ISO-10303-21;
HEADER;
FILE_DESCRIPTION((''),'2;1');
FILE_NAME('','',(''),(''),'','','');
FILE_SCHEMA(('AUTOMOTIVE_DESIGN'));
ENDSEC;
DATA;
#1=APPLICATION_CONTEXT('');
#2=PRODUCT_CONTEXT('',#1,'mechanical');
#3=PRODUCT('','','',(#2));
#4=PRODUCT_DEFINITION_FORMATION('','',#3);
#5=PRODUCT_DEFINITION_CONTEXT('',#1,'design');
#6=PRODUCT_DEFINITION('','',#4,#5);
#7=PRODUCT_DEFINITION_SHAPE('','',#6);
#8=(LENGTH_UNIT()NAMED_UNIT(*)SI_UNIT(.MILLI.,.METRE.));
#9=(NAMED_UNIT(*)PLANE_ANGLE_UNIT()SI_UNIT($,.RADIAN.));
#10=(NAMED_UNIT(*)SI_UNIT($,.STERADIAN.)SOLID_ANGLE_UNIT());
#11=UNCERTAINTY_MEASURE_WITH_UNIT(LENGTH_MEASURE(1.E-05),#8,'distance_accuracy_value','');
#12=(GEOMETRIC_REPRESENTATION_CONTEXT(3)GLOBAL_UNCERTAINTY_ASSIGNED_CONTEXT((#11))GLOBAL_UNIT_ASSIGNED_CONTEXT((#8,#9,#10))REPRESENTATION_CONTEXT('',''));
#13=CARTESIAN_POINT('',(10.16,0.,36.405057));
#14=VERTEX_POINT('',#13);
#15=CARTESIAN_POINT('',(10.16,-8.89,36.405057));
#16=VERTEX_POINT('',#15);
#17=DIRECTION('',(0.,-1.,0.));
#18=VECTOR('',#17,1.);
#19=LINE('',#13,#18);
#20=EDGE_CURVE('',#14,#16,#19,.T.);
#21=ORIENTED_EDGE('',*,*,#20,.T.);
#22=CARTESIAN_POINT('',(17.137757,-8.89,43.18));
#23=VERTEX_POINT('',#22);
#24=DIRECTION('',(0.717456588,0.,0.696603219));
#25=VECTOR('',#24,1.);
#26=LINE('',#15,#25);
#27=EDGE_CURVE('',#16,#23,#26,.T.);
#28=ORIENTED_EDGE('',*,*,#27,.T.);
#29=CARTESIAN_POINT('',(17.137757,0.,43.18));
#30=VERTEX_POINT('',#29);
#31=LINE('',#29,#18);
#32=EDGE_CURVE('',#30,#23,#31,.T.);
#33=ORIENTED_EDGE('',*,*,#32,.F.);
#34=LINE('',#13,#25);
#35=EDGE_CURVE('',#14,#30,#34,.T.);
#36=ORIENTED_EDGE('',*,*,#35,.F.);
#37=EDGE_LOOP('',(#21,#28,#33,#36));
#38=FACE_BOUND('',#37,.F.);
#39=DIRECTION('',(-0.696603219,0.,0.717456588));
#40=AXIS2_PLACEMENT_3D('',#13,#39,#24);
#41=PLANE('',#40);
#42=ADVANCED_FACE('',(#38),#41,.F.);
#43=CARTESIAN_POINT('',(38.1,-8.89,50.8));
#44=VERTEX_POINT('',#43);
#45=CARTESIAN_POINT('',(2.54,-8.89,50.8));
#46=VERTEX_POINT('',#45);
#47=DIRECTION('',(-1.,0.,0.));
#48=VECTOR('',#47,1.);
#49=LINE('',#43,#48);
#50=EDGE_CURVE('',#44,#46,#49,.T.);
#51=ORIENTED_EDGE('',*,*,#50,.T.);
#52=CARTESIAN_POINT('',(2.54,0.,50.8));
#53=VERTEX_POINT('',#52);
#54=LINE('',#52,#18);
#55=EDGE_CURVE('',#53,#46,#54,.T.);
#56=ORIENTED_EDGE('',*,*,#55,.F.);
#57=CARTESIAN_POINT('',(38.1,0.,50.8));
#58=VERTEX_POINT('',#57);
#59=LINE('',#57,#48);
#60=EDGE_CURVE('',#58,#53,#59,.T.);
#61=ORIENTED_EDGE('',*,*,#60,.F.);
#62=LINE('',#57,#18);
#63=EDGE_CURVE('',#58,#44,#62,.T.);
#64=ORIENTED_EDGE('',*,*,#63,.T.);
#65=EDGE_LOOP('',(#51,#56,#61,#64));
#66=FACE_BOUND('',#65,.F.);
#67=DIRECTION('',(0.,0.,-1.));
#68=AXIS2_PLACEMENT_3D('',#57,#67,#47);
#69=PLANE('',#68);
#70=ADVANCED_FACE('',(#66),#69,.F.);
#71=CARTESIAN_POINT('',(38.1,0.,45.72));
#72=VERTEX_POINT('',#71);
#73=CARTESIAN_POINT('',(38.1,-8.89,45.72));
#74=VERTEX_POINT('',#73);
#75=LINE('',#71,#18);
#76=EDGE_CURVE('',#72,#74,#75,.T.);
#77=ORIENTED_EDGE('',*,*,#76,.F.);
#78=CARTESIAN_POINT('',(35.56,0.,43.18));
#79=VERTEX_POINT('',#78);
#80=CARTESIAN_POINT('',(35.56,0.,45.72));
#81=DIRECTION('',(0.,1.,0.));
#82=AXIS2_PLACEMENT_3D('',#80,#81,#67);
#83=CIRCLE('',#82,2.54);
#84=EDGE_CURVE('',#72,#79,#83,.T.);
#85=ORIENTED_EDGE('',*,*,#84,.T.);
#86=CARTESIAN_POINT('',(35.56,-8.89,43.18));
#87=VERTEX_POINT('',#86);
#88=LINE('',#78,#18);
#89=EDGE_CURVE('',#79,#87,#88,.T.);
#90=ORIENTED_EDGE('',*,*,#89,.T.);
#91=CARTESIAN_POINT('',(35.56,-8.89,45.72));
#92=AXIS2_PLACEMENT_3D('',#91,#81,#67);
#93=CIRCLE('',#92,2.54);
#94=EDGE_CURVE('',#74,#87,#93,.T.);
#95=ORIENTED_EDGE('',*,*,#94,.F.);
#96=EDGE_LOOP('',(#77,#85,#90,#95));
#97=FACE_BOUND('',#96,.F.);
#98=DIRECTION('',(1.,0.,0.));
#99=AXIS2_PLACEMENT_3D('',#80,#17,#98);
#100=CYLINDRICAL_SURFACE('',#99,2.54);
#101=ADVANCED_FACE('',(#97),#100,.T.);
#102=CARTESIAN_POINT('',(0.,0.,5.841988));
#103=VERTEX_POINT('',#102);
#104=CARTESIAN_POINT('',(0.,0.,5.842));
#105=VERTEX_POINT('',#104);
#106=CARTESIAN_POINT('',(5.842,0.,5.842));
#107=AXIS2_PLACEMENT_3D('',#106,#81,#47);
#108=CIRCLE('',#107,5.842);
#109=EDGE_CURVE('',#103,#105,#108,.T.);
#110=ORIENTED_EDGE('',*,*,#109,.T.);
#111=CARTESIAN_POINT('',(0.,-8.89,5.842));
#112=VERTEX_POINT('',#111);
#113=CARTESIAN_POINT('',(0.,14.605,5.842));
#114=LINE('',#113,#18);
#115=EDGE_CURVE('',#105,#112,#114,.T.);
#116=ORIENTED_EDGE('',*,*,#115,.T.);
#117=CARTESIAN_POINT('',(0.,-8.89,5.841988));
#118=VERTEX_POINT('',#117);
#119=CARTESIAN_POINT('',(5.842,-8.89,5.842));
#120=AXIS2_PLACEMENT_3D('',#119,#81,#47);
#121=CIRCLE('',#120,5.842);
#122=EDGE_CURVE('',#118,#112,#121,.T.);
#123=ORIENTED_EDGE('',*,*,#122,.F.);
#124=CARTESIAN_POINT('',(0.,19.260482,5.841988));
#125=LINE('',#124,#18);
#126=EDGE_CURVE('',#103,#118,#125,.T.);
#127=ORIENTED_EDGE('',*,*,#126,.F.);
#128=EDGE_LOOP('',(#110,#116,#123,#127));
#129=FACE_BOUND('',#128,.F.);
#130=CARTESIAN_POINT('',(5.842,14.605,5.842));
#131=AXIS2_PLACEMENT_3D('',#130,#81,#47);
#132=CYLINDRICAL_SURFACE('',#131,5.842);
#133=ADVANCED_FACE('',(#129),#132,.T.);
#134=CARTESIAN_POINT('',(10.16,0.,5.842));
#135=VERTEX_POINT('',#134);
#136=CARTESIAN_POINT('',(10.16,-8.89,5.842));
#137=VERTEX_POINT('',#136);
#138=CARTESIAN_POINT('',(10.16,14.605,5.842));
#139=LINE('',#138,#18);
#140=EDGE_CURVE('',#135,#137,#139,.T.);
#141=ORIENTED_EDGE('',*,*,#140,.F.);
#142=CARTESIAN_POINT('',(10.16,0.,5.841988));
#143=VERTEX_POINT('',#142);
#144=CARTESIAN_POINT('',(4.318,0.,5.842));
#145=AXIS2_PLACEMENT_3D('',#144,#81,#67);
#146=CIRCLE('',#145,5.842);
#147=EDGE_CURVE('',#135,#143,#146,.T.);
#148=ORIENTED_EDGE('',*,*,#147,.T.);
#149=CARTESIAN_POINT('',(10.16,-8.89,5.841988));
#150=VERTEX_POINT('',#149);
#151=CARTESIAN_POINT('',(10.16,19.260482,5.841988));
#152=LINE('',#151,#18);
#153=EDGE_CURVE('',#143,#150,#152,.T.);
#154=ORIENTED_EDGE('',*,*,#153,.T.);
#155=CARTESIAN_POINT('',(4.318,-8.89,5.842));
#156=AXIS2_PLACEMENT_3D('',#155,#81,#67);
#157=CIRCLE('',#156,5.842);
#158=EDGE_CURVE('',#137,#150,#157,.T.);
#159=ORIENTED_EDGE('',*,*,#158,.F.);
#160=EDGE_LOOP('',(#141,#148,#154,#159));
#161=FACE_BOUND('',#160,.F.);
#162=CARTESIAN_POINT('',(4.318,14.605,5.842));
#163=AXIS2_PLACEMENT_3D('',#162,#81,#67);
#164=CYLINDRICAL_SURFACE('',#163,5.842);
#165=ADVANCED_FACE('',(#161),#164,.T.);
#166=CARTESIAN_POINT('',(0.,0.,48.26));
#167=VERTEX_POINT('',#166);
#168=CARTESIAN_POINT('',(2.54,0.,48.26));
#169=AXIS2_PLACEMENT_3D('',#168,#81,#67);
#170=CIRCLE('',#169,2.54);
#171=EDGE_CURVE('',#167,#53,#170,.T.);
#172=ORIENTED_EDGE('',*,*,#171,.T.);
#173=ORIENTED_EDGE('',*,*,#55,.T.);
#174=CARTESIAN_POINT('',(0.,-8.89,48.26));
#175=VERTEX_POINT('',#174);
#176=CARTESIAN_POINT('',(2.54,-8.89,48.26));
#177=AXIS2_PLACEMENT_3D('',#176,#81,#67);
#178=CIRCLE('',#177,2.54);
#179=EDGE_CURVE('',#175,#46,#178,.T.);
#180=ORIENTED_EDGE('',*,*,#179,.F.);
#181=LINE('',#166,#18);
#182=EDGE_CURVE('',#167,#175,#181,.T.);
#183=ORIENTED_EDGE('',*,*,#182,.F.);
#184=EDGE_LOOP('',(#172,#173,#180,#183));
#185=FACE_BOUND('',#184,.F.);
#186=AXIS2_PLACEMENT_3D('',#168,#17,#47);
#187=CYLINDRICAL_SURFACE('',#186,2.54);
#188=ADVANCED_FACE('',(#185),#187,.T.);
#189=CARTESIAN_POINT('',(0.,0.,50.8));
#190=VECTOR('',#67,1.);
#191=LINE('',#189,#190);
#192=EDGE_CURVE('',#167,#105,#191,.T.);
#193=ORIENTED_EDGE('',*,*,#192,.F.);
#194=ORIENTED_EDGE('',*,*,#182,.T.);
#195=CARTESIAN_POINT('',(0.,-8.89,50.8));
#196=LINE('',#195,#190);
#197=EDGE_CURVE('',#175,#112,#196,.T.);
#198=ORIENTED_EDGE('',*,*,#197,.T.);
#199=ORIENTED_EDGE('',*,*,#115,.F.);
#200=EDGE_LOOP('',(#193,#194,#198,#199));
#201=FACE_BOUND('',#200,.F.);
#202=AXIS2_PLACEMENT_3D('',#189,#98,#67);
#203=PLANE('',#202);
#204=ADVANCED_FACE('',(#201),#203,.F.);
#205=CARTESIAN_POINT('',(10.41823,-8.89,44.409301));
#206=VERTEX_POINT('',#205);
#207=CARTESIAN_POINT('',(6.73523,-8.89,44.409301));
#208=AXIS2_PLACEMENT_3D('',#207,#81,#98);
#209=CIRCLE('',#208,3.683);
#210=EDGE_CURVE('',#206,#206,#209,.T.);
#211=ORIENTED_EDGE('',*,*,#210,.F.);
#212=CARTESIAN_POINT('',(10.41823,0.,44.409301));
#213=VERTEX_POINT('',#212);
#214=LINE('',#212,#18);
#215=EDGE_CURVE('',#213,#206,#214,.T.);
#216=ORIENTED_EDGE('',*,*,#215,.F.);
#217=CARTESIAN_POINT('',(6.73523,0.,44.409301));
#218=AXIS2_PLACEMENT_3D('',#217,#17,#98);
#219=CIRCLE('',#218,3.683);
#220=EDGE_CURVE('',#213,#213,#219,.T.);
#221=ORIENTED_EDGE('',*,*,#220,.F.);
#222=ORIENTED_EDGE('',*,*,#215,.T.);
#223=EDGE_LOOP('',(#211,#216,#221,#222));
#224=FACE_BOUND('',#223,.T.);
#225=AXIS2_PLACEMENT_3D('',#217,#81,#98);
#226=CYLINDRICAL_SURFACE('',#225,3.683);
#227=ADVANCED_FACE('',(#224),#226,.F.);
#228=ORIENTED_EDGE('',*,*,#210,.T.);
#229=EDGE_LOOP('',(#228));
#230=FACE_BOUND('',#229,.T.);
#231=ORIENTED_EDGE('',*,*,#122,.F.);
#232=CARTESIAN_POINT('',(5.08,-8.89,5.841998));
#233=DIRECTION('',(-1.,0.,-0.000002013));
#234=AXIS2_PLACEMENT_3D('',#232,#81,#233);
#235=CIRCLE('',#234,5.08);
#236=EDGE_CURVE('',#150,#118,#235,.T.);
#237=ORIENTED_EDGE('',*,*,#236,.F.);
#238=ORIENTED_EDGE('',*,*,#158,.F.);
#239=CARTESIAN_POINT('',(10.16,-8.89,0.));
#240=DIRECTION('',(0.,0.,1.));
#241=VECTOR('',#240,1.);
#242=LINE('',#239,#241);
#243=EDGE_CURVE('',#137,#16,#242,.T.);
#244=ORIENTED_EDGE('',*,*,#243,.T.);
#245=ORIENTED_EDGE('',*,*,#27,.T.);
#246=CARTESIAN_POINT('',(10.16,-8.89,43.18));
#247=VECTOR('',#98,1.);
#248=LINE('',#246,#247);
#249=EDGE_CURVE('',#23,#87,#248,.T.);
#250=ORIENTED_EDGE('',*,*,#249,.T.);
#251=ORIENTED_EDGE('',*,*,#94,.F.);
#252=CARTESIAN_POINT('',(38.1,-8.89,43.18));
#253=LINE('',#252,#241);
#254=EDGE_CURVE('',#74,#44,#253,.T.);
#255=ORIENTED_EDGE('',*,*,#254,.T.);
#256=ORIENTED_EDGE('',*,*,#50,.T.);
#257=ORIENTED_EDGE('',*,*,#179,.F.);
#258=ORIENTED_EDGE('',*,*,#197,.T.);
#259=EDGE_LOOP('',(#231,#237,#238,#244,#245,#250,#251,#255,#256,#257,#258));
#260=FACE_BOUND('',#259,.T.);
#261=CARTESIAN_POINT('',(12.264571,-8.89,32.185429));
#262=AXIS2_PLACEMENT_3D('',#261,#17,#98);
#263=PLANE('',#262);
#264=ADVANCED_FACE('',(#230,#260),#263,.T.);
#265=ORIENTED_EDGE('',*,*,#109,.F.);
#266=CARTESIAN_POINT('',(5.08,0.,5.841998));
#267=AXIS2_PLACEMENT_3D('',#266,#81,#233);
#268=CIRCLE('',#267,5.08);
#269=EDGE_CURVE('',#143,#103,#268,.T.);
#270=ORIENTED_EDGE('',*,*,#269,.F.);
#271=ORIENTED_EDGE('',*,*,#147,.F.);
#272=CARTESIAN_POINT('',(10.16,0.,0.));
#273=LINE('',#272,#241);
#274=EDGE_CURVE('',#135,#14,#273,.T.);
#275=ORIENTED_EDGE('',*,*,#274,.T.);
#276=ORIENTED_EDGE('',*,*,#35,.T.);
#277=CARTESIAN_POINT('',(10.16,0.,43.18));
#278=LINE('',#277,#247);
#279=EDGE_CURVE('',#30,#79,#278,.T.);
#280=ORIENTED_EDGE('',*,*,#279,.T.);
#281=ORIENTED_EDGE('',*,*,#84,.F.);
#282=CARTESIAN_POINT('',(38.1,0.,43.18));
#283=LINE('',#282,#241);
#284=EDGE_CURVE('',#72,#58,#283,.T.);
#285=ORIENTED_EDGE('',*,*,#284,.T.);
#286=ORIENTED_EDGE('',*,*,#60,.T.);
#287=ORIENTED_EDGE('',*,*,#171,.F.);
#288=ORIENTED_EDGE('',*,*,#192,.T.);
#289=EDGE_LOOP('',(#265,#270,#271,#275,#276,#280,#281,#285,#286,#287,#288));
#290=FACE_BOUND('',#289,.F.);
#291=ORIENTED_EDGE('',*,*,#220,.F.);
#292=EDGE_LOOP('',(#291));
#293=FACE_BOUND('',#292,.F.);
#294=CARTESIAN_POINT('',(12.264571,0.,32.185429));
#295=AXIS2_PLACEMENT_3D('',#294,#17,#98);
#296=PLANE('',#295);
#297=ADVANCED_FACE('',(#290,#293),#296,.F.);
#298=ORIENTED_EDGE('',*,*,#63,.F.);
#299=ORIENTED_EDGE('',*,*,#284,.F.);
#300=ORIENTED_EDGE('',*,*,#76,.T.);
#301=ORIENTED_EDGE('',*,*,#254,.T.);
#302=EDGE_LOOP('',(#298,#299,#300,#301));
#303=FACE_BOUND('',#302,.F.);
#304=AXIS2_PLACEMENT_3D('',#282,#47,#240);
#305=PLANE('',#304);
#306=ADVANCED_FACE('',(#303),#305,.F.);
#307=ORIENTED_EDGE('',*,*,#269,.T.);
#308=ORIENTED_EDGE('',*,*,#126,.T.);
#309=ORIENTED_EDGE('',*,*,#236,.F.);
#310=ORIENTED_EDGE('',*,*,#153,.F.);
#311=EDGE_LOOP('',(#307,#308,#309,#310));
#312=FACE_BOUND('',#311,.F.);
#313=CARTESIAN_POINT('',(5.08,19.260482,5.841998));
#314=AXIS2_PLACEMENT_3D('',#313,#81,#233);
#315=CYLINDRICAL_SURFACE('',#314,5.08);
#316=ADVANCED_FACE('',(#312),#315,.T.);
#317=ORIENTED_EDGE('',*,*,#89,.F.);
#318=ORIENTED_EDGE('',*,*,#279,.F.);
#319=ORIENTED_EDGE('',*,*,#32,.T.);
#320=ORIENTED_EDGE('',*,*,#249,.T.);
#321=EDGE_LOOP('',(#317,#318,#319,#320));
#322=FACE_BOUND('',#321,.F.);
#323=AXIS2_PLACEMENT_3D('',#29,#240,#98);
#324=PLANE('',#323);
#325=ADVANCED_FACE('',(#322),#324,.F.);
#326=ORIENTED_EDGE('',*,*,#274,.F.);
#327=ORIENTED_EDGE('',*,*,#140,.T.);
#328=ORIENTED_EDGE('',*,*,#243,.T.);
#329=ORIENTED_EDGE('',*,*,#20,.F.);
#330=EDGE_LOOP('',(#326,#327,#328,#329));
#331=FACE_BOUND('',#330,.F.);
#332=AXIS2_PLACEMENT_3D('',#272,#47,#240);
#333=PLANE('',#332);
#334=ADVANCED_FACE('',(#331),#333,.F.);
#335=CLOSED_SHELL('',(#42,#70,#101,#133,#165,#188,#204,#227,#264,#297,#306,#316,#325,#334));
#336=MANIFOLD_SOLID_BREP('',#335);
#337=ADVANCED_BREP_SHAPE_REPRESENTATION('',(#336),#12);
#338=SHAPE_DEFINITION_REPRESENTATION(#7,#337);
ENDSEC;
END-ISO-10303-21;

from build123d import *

# Parameters (mm, degrees)
F1_DEPTH    = 8.89
F2_R        = 3.683
F3_DEPTH    = 13.208
F4_R        = 2.54
F5_T1_DEPTH = 38.1
F6_T1_DEPTH = 47.4109630585


# Not quite as in the source:
# - a fillet or chamfer that OpenCascade refuses, or shapes differently, is made with other operations: its cross-section is extruded or revolved along the edge and cut away or added


with BuildPart() as f1:
    # F0 (on Front) → F1 (new body)
    with BuildSketch(Plane.XZ):
        Polygon((0, 50.8), (0, 0), (10.16, 0), (10.16, 36.405056715), (10.16, 43.18), (17.1377565712, 43.18), (38.1, 43.18), (38.1, 50.8), align=None)
        Polygon((10.16, 43.18), (10.16, 36.405056715), (17.1377565712, 43.18), align=None)
    extrude(amount=F1_DEPTH)

    # F2 (on Front) → F3 (cut)
    with BuildSketch(Plane.XZ):
        with Locations((6.7352303304, 44.409301132)):
            Circle(F2_R)
    extrude(amount=F3_DEPTH, mode=Mode.SUBTRACT)

    # F4
    f4_edges = [f1.edges().sort_by_distance(p)[0] for p in [
        (0, -4.445, 50.8),
        (38.1, -4.445, 43.18),
    ]]
    fillet(f4_edges, radius=F4_R)

    # F5: fillet of radius 5.842 on 2 edges, made by hand

    # F5_s2 → F5_t1 (cut)
    with BuildSketch(Plane.XZ.offset(-14.605)):
        with BuildLine():
            ThreePointArc((0, 5.842), (1.7110821843, 1.7110821843), (5.842, 0))
            Line((5.842, 0), (0, 0))
            Line((0, 0), (0, 5.842))
        make_face()
        with BuildLine():
            ThreePointArc((4.318, 0), (8.4489178157, 1.7110821843), (10.16, 5.842))
            Line((10.16, 5.842), (10.16, 0))
            Line((10.16, 0), (4.318, 0))
        make_face()
    extrude(amount=F5_T1_DEPTH, mode=Mode.SUBTRACT)

    # F6: fillet of radius 5.08 on 1 edges, made by hand

    # F6_s2 → F6_t1 (cut)
    with BuildSketch(Plane.XZ.offset(-19.2604815292)):
        with BuildLine():
            ThreePointArc((0, 5.8419882424), (5.08, 0.7619984664), (10.16, 5.8419882424))
            ThreePointArc((10.16, 5.8419882424), (8.710066706, 1.9898948547), (5.08, 0.0499088405))
            ThreePointArc((5.08, 0.0499088405), (1.449933294, 1.9898948547), (0, 5.8419882424))
        make_face()
    extrude(amount=F6_T1_DEPTH, mode=Mode.SUBTRACT)


solid = f1.part
